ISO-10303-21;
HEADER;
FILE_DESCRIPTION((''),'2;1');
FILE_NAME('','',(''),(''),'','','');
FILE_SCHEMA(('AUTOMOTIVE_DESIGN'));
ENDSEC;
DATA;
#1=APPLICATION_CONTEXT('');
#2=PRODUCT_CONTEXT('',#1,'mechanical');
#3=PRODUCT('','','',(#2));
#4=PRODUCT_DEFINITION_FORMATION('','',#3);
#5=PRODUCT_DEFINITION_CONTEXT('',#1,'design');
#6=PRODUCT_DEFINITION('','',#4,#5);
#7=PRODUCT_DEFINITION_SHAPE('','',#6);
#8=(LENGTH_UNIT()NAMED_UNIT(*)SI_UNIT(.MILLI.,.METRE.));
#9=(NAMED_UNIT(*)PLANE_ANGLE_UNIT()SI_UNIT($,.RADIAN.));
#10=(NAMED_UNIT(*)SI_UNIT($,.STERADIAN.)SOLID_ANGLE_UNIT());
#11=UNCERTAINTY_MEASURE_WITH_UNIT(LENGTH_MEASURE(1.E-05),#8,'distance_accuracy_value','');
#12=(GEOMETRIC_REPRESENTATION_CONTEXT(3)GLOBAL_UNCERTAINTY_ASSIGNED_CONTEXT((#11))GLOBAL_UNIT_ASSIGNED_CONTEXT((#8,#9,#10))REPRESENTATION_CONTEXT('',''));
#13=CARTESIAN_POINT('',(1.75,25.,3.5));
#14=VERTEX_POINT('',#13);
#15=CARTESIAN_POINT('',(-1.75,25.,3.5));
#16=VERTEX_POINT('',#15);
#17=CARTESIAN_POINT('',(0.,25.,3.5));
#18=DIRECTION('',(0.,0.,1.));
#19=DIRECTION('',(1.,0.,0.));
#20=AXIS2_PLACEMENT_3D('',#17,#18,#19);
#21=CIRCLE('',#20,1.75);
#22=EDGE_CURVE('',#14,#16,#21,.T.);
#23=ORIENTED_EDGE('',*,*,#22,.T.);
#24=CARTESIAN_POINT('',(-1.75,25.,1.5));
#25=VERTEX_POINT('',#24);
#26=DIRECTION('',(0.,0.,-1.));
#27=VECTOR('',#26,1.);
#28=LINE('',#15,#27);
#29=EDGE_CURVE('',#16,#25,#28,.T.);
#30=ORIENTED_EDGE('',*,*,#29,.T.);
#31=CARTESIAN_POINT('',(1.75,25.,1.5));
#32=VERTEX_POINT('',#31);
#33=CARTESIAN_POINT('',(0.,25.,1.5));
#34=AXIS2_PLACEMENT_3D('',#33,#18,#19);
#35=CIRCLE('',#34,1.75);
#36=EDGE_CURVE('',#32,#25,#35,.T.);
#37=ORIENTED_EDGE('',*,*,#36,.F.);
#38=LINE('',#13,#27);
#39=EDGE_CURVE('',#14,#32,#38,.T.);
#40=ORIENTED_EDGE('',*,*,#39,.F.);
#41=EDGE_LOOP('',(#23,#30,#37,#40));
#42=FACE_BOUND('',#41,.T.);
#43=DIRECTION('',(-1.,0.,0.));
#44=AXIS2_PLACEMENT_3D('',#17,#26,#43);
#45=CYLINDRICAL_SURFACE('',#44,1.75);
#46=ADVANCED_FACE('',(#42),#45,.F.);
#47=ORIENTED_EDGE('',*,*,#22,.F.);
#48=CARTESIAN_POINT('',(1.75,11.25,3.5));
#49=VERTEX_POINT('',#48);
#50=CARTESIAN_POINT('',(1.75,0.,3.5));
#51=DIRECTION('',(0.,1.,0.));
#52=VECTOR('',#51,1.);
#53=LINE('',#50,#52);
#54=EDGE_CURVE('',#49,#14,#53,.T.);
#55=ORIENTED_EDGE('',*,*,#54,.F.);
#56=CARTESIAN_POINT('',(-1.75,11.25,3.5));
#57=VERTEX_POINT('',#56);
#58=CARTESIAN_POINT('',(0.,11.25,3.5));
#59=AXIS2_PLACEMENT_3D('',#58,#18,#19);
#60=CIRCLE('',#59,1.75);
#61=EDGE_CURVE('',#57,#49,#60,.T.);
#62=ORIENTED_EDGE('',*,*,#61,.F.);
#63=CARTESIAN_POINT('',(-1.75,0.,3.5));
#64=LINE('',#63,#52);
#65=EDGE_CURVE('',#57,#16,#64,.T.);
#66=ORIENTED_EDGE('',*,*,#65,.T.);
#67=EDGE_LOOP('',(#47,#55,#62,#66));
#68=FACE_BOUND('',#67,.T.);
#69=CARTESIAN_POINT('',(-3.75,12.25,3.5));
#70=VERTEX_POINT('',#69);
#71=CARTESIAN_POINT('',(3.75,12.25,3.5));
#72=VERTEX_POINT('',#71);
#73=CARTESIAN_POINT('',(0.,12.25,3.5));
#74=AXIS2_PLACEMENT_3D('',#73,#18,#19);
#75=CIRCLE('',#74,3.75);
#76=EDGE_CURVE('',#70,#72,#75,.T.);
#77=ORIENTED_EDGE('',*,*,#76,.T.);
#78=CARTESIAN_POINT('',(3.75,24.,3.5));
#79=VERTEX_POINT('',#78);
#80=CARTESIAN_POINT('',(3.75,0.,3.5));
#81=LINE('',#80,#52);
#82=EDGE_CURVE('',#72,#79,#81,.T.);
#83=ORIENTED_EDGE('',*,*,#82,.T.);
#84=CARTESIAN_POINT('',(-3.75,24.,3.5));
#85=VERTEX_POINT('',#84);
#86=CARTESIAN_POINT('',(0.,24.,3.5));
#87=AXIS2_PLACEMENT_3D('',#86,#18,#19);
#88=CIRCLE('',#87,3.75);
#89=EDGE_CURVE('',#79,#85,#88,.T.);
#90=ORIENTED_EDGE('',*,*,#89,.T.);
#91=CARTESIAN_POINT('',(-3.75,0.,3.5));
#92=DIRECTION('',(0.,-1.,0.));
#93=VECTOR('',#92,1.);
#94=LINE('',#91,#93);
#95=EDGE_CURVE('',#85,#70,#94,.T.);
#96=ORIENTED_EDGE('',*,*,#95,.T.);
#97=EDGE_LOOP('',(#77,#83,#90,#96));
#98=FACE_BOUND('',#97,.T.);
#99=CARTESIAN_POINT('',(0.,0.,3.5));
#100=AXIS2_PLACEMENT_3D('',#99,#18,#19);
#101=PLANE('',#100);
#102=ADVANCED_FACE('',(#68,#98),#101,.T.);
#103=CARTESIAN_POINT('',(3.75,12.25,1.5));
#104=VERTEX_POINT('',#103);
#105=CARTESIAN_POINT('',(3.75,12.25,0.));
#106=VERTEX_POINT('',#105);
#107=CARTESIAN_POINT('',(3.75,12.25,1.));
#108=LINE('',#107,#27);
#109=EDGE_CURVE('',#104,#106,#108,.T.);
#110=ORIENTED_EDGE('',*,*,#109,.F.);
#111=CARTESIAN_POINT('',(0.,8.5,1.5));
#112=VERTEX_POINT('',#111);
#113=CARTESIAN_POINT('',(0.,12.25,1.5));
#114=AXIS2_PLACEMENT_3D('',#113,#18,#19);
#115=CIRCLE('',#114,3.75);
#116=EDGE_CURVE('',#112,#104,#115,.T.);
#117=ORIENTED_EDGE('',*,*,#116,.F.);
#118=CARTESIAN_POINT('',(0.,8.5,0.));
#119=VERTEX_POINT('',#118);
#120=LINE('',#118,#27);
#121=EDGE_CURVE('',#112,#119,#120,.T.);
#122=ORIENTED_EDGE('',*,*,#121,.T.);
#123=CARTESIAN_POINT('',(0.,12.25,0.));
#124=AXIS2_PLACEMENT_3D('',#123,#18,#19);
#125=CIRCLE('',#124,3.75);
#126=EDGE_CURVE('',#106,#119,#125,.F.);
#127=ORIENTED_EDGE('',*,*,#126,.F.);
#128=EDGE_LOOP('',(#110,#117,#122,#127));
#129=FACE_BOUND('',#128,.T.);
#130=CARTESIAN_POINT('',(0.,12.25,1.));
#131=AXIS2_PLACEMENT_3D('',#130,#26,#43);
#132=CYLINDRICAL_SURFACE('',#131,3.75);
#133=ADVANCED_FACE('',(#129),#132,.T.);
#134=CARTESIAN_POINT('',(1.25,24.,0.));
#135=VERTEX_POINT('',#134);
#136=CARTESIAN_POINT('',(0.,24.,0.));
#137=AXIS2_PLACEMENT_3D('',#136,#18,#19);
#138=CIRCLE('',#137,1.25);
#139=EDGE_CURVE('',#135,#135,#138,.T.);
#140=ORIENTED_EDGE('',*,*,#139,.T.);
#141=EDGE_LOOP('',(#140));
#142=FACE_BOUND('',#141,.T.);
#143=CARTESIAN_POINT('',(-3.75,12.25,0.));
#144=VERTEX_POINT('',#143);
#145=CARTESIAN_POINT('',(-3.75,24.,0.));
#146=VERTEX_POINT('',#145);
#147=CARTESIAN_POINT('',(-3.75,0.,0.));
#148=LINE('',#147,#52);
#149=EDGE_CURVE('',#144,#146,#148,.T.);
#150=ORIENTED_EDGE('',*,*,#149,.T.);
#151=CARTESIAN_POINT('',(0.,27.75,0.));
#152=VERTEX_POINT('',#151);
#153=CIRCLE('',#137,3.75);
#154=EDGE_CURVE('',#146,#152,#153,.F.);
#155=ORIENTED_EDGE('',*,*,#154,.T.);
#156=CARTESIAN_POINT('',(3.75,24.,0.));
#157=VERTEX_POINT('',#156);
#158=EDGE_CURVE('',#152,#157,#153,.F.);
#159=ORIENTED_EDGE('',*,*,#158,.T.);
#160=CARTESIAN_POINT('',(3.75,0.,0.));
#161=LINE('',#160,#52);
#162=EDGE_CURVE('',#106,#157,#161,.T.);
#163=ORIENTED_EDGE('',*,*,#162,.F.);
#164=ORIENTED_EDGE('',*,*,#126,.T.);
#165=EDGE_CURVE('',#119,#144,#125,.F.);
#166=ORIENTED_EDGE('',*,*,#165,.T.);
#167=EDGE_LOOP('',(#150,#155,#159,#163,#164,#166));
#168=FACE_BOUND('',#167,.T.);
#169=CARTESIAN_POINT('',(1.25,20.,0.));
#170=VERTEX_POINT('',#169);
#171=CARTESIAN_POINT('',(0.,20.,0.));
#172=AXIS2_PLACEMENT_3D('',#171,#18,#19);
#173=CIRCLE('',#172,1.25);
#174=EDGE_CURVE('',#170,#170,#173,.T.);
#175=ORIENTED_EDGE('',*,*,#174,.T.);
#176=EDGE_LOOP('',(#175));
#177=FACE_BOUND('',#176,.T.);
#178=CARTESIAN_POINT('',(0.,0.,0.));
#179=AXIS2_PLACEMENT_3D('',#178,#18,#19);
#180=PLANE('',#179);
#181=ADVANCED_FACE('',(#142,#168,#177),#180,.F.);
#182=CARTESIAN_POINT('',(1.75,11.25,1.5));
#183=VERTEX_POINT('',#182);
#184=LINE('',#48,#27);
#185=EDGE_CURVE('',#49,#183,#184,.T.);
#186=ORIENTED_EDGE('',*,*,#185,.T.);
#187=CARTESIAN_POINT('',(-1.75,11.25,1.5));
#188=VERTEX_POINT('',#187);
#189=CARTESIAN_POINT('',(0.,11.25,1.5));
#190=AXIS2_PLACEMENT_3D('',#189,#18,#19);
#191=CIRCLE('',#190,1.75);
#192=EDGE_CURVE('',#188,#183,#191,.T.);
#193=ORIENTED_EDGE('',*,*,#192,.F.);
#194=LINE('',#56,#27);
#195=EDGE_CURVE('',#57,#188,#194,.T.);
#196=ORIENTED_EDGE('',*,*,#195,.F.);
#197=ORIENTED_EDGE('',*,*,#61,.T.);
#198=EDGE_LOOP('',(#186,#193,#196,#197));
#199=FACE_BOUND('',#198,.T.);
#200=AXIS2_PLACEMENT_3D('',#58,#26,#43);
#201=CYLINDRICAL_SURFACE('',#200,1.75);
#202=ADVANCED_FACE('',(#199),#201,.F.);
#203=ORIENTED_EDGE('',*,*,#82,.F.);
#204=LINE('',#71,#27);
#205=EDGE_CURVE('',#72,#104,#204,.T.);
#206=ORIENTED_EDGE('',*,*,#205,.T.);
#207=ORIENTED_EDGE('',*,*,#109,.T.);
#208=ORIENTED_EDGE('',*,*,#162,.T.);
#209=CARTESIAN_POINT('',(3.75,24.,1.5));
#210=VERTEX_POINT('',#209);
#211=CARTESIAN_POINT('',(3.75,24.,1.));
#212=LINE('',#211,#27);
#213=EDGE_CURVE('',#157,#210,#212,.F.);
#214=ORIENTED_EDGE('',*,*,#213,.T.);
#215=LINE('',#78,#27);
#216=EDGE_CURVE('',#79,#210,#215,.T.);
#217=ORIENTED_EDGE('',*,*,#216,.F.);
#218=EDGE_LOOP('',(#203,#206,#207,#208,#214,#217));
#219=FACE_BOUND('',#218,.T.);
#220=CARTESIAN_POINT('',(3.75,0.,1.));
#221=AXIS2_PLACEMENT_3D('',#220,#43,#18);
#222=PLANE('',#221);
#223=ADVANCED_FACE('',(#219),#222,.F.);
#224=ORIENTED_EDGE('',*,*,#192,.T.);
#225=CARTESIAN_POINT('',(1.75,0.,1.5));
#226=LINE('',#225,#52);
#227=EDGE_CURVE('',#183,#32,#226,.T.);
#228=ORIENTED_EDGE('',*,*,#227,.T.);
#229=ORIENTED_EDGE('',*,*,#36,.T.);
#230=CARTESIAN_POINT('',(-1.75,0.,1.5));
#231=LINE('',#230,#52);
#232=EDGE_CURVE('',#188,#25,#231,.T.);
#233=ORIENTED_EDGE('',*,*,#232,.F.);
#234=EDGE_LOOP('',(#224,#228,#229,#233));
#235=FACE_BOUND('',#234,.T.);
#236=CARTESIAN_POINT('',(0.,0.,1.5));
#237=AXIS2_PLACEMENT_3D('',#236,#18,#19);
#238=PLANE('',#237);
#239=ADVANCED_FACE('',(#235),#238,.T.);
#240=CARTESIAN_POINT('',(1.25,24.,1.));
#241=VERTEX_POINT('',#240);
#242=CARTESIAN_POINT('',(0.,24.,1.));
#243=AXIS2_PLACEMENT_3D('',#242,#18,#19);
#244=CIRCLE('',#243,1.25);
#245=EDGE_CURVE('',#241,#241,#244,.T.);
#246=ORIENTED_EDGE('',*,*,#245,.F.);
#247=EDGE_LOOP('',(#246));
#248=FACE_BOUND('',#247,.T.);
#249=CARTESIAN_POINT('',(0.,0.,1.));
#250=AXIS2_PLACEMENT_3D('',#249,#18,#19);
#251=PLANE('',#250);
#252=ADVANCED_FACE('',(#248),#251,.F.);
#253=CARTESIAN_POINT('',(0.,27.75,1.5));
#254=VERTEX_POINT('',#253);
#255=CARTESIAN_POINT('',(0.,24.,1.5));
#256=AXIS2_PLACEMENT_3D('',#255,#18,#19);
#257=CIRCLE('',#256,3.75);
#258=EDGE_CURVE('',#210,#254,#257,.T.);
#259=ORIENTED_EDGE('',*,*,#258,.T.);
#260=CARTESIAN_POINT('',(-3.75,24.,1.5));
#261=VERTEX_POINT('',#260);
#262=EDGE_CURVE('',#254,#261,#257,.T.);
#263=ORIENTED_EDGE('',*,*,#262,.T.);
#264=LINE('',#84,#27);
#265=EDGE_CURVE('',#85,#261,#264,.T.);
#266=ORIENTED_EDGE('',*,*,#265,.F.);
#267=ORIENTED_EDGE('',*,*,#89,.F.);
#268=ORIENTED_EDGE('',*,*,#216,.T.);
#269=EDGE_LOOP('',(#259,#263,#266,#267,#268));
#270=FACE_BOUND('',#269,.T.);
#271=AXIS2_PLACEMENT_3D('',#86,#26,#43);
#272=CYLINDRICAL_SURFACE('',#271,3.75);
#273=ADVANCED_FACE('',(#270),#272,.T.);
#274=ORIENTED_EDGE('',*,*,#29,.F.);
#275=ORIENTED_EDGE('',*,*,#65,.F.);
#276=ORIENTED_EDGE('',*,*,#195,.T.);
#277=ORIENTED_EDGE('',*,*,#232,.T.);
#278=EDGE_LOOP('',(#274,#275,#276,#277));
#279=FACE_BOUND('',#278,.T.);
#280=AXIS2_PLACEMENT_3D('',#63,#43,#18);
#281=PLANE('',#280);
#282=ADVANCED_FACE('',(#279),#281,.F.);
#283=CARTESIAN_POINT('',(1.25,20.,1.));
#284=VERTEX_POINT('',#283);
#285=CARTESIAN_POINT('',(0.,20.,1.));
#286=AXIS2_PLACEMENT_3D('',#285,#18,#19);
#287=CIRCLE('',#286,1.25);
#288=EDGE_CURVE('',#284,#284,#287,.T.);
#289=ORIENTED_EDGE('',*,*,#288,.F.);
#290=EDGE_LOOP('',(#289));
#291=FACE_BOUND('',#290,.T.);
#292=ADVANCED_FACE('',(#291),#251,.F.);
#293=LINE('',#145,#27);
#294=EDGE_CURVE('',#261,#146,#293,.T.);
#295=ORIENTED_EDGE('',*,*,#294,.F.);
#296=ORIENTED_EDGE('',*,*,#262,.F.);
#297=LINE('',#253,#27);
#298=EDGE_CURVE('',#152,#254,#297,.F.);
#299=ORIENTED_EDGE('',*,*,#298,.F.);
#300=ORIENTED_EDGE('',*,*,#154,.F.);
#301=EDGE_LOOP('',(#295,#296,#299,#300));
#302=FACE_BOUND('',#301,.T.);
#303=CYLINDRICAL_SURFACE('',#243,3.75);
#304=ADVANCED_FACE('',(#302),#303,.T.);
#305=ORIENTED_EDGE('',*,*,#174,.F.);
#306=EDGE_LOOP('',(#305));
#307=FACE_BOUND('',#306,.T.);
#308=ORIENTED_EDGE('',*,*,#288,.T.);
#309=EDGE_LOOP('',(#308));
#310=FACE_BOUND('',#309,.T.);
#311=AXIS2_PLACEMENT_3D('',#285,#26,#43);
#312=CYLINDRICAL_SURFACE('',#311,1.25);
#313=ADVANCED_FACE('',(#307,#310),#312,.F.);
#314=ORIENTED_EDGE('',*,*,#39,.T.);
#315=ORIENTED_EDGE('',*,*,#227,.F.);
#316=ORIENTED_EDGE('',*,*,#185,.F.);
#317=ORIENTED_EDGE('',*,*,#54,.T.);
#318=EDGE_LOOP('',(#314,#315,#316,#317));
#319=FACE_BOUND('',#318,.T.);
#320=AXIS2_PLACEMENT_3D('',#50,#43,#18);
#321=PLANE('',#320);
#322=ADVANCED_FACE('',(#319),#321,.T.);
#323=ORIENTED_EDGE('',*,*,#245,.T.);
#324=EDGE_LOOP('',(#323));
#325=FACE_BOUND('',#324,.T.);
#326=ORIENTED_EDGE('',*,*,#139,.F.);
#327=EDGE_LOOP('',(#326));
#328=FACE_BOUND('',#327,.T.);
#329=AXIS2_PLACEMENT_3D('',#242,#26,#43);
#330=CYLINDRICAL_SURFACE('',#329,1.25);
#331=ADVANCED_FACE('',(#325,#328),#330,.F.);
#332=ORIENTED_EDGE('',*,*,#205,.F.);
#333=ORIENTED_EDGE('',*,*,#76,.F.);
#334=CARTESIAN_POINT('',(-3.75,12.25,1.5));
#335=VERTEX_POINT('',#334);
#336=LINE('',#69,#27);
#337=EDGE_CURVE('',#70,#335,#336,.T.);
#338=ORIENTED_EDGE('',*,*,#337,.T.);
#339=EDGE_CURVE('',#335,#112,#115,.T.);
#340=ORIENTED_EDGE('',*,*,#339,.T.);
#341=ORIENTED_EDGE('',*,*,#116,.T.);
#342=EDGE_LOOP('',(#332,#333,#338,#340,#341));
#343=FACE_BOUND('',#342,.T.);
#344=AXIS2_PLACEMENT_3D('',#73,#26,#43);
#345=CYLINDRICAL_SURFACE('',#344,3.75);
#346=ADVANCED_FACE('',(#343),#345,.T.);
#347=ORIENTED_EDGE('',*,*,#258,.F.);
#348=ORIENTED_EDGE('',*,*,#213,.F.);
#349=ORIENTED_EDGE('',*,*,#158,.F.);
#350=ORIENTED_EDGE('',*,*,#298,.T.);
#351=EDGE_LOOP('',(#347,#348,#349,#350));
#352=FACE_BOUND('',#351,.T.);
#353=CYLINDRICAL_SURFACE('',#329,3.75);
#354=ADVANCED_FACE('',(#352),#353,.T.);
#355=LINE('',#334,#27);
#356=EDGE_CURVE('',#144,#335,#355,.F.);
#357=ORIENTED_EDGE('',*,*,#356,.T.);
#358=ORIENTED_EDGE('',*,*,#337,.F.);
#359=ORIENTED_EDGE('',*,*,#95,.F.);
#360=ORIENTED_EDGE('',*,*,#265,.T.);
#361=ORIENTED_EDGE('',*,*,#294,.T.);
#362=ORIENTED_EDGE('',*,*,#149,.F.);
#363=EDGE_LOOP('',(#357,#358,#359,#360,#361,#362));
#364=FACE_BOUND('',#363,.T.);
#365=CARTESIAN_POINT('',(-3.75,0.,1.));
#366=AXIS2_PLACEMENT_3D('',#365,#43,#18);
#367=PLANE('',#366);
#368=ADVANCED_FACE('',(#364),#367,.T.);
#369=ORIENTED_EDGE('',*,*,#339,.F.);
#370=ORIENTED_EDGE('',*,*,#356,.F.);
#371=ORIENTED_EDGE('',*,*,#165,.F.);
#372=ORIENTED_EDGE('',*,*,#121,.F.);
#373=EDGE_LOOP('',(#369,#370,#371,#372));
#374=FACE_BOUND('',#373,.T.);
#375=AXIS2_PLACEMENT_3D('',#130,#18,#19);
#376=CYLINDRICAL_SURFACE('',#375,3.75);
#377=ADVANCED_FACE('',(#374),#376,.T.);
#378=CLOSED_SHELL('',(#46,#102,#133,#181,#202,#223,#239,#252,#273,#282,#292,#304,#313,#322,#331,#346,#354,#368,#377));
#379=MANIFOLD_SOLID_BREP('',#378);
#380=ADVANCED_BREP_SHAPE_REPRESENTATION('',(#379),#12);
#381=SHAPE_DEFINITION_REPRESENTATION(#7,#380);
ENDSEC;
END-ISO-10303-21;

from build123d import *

# Parameters (mm, degrees)
BOSS_EXTRUDE1_DEPTH = 1
SKETCH2_W           = 7.5
SKETCH2_H           = 19.25
BOSS_EXTRUDE2_DEPTH = 0.5
BOSS_EXTRUDE3_DEPTH = 2
FILLET1_R           = 3.75


with BuildPart() as part:
    # Sketch1 → Boss-Extrude1 (new body)
    with BuildSketch(Plane.XY):
        with BuildLine():
            Line((-3.75, 8.5), (0, 8.5))
            Line((0, 8.5), (0, 18.75))
            ThreePointArc((0, 18.75), (-1.25, 20), (0, 21.25))
            Line((0, 21.25), (0, 22.75))
            ThreePointArc((0, 22.75), (-1.25, 24), (0, 25.25))
            Line((0, 25.25), (0, 27.75))
            Line((0, 27.75), (-3.75, 27.75))
            Line((-3.75, 27.75), (-3.75, 8.5))
        make_face()
        with BuildLine():
            Line((0, 18.75), (0, 8.5))
            Line((0, 8.5), (3.75, 8.5))
            Line((3.75, 8.5), (3.75, 27.75))
            Line((3.75, 27.75), (0, 27.75))
            Line((0, 27.75), (0, 25.25))
            ThreePointArc((0, 25.25), (0.883883476, 24.883883476), (1.25, 24))
            ThreePointArc((1.25, 24), (0.883883476, 23.116116524), (0, 22.75))
            Line((0, 22.75), (0, 21.25))
            ThreePointArc((0, 21.25), (0.883883476, 20.883883476), (1.25, 20))
            ThreePointArc((1.25, 20), (0.883883476, 19.116116524), (0, 18.75))
        make_face()
    extrude(amount=BOSS_EXTRUDE1_DEPTH)

    # Sketch2 → Boss-Extrude2 (add)
    with BuildSketch(Plane.XY.offset(1)):
        with Locations((0, 18.125)):
            Rectangle(SKETCH2_W, SKETCH2_H)
    extrude(amount=BOSS_EXTRUDE2_DEPTH)

    # Sketch3 → Boss-Extrude3 (add)
    with BuildSketch(Plane.XY.offset(1.5)):
        with BuildLine():
            ThreePointArc((3.75, 24), (1.097979873, 27.585657568), (-3.107034772, 26.099722582))
            Line((-3.107034772, 26.099722582), (-1.75, 22.616666667))
            Line((-1.75, 22.616666667), (-1.75, 25))
            ThreePointArc((-1.75, 25), (0, 26.75), (1.75, 25))
            Line((1.75, 25), (1.75, 13.633333333))
            Line((1.75, 13.633333333), (3.107034772, 10.150277418))
            ThreePointArc((3.107034772, 10.150277418), (3.585657568, 11.152020127), (3.75, 12.25))
            Line((3.75, 12.25), (3.75, 24))
        make_face()
        with BuildLine():
            Line((-1.75, 22.616666667), (-3.107034772, 26.099722582))
            ThreePointArc((-3.107034772, 26.099722582), (-3.585657568, 25.097979873), (-3.75, 24))
            Line((-3.75, 24), (-3.75, 12.25))
            ThreePointArc((-3.75, 12.25), (-1.097979873, 8.664342432), (3.107034772, 10.150277418))
            Line((3.107034772, 10.150277418), (1.75, 13.633333333))
            Line((1.75, 13.633333333), (1.75, 11.25))
            ThreePointArc((1.75, 11.25), (0, 9.5), (-1.75, 11.25))
            Line((-1.75, 11.25), (-1.75, 22.616666667))
        make_face()
    extrude(amount=BOSS_EXTRUDE3_DEPTH)

    # Fillet1
    fillet1_edges = [part.edges().sort_by_distance(p)[0] for p in [
        (3.75, 8.5, 0.75),
        (-3.75, 8.5, 0.75),
        (3.75, 27.75, 0.75),
        (-3.75, 27.75, 0.75),
    ]]
    fillet(fillet1_edges, radius=FILLET1_R - 0.0001)  # a hair under: the kernel refuses the full size


solid = part.part
